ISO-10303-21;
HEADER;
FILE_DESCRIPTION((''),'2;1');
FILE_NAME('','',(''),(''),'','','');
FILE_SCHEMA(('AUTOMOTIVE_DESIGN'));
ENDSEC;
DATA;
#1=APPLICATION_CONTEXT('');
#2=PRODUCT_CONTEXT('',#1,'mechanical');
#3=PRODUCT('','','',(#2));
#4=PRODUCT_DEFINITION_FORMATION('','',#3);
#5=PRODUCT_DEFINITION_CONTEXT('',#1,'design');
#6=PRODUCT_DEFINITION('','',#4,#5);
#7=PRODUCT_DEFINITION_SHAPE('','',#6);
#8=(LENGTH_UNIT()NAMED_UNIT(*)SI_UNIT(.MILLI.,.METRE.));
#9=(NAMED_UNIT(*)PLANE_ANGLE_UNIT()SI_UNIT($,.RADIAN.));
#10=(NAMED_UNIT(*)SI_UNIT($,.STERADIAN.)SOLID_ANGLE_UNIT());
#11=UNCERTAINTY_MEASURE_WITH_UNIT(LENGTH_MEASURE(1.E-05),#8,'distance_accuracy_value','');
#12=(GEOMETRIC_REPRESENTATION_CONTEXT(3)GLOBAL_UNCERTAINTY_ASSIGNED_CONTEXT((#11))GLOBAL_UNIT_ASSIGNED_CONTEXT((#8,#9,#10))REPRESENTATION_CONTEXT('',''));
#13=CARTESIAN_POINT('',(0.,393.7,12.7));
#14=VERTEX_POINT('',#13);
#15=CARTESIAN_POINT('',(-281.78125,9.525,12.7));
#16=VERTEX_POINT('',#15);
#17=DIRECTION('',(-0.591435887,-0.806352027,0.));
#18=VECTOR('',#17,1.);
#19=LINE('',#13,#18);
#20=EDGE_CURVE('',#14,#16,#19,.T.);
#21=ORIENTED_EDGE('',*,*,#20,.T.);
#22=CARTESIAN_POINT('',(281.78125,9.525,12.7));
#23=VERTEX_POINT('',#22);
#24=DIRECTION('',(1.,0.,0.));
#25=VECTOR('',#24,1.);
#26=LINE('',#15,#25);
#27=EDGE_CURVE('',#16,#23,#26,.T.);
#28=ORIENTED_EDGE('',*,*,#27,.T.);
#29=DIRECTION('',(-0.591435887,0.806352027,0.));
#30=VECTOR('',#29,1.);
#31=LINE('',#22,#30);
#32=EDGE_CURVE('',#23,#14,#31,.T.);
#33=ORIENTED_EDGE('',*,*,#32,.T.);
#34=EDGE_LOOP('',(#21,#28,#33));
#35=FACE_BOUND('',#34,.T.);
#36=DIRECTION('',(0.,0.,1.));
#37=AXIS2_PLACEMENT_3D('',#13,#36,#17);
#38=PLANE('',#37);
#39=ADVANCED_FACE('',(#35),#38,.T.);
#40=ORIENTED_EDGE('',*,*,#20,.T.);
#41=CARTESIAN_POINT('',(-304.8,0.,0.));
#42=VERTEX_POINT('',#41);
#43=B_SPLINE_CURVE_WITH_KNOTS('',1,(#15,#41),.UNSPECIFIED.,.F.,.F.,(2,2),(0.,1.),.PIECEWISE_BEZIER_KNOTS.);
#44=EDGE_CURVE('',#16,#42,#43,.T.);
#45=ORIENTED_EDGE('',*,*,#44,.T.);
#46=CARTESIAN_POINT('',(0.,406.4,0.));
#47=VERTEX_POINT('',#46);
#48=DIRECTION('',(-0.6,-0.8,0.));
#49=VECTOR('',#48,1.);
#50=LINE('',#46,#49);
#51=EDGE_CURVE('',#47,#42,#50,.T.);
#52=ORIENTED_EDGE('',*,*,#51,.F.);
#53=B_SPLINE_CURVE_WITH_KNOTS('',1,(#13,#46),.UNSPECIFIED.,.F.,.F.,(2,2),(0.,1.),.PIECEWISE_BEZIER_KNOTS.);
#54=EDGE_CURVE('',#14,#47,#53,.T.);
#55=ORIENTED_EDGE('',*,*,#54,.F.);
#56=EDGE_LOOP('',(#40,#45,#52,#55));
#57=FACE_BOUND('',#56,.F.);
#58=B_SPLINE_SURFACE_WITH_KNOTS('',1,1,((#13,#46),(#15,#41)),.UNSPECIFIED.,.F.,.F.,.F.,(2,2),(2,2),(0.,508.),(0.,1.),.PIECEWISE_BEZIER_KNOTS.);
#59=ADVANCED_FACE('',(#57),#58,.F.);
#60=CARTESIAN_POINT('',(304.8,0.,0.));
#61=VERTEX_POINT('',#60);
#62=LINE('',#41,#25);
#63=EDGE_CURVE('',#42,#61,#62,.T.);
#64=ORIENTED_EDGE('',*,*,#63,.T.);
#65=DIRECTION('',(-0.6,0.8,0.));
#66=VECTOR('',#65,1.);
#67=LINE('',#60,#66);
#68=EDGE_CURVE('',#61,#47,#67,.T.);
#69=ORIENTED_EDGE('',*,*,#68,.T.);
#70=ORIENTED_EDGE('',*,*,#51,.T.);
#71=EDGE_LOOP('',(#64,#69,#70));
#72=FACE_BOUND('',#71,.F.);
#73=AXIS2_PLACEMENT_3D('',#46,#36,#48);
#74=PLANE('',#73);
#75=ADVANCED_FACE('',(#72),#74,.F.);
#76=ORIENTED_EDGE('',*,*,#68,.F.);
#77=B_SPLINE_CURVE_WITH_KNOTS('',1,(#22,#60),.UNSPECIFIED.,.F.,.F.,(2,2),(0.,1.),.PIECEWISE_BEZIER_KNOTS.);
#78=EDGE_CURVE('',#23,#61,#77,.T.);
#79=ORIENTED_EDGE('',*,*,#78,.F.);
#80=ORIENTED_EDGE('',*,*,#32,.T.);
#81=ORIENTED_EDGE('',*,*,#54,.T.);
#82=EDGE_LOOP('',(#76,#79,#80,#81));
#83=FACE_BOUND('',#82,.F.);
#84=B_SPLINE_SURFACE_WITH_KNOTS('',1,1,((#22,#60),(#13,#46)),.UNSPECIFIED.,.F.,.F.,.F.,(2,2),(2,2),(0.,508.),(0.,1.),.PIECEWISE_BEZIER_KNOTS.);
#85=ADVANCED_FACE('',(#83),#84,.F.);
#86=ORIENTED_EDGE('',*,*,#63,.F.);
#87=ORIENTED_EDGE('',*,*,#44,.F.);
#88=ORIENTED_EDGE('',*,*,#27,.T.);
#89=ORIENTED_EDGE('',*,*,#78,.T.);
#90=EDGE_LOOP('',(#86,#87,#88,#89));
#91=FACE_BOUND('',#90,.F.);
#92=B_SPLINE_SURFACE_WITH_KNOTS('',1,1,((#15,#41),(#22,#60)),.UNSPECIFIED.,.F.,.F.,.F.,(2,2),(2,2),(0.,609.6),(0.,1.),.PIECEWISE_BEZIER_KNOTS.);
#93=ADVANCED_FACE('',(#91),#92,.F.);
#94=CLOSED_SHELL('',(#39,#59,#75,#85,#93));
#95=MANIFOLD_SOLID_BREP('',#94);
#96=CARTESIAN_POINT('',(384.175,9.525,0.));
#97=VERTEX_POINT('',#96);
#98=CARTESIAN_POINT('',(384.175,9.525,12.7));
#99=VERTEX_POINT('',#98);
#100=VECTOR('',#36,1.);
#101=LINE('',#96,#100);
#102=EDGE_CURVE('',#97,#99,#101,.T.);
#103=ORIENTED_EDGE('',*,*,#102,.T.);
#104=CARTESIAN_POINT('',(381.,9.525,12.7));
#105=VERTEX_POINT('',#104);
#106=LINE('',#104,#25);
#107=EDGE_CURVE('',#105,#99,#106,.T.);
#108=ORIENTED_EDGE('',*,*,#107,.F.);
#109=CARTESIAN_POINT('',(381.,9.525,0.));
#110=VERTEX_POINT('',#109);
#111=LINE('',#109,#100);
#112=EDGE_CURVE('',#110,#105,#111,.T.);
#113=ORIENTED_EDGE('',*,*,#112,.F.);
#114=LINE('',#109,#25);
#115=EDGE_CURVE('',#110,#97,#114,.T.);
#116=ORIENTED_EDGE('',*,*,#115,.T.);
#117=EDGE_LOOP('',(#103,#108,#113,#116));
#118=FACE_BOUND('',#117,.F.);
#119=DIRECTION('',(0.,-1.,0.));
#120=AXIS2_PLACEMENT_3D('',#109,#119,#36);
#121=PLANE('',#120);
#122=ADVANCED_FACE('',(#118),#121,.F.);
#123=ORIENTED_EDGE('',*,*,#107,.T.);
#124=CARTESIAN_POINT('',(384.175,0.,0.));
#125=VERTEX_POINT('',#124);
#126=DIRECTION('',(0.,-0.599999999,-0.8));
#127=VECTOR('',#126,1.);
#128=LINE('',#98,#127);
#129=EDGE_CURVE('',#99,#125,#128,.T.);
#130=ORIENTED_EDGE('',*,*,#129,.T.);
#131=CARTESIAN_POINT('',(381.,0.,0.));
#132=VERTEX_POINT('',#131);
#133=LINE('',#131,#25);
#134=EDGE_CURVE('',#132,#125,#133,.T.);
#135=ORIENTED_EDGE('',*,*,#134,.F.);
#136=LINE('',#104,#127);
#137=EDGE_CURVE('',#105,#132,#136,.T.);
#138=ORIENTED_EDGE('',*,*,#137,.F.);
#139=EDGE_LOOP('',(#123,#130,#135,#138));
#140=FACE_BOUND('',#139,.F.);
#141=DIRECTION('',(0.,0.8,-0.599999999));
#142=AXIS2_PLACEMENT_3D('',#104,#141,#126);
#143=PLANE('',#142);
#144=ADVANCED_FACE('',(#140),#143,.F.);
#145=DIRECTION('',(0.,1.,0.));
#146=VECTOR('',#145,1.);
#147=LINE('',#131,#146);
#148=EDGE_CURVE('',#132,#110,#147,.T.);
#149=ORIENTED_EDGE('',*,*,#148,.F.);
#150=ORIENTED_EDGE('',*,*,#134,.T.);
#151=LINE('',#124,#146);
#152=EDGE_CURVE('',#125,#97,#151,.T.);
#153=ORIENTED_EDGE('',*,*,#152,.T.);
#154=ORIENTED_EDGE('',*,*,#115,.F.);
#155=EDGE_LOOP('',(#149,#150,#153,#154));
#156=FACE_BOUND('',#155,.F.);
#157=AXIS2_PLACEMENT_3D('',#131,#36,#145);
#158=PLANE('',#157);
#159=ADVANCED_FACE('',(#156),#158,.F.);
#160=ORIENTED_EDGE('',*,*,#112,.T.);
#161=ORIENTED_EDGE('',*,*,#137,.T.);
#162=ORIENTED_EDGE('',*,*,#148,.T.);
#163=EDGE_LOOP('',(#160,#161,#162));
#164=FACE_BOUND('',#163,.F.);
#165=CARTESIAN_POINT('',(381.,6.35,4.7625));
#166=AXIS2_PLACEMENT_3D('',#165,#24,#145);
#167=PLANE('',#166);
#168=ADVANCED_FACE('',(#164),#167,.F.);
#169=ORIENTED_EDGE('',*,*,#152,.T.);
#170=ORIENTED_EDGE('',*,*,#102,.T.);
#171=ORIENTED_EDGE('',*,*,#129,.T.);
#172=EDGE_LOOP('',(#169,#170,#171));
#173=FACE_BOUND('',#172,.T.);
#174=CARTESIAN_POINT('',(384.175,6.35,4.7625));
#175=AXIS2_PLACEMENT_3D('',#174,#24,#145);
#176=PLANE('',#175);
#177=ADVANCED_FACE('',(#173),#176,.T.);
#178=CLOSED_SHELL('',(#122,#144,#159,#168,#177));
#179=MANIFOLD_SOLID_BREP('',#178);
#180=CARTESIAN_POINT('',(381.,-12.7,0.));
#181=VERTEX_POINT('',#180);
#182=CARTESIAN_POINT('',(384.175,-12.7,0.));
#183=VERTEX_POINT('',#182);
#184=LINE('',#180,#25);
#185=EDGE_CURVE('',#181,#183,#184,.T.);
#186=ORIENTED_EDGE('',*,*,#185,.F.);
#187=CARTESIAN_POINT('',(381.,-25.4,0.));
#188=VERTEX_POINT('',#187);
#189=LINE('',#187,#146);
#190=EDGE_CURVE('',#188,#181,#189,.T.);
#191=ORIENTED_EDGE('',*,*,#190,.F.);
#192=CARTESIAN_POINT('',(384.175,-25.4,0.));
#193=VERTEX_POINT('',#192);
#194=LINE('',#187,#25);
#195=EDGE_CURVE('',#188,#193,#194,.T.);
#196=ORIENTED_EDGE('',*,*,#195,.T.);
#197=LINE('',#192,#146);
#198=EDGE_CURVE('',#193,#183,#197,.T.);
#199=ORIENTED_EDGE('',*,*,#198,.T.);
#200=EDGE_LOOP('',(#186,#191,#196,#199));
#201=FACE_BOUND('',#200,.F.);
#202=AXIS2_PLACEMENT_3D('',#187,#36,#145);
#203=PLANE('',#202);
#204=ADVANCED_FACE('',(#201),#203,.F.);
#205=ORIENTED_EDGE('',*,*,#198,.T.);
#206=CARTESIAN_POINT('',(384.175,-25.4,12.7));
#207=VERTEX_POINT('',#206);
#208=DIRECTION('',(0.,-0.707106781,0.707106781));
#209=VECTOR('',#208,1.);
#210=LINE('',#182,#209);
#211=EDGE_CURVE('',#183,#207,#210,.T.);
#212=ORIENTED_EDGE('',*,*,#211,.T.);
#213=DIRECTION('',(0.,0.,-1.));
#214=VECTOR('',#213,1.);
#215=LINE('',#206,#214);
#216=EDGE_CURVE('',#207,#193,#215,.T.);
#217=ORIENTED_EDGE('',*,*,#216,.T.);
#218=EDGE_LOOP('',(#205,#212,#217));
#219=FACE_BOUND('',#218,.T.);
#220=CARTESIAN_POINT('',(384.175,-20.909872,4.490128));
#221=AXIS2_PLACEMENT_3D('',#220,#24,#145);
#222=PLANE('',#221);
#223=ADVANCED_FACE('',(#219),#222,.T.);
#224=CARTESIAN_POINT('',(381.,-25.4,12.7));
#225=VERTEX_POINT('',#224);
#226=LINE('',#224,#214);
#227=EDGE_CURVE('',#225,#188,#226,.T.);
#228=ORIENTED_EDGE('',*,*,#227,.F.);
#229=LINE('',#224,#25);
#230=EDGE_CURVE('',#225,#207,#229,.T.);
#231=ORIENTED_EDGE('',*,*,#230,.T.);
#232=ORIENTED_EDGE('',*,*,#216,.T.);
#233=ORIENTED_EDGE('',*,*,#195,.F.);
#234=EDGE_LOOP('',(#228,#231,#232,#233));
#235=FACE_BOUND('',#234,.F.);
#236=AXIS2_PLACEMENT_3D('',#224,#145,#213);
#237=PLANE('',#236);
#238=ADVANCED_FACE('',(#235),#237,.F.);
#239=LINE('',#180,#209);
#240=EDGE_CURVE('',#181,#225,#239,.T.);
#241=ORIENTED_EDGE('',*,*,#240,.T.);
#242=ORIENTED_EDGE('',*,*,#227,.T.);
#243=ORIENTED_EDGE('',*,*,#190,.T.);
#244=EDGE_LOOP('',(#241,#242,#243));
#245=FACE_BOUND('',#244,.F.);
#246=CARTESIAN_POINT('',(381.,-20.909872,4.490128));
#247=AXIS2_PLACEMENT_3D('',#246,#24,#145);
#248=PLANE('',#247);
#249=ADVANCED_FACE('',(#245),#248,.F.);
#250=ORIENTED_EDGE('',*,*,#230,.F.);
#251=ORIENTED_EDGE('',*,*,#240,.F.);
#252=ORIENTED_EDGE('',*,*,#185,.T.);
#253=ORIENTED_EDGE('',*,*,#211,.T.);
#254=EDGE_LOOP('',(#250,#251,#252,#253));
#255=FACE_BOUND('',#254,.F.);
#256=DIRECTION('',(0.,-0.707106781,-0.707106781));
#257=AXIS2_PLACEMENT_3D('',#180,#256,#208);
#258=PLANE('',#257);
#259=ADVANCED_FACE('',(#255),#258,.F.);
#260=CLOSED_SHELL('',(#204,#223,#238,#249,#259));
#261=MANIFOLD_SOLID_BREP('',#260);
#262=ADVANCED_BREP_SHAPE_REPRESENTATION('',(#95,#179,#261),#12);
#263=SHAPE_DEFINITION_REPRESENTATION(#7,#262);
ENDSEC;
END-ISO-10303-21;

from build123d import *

# Parameters (mm, degrees)
F10_DEPTH = 3.175


# Not quite as in the source:
# - a length typed as a fraction of an inch, garbled in the dataset ("3 / 203.2 mm" for 3/8 in), is restored


with BuildPart() as f7:
    # F6 (on offset) → F7 section 0
    with BuildSketch(Plane.XY.offset(12.7)):
        Polygon((0, 393.7), (-281.7812500119, 9.5249999841), (0, 9.5249999841), (281.7812500119, 9.5249999841), align=None)
    # F1 (on Top) → F7 section 1
    with BuildSketch(Plane.XY):
        Polygon((-304.8, 0), (0, 0), (304.8, 0), (0, 406.4), align=None)
    loft()


with BuildPart() as f10:
    # F9 (on offset) → F10 (new body)
    with BuildSketch(Plane.YZ.offset(381)):
        Polygon((9.5249999841, 0), (9.5249999841, 12.7), (0, 0), align=None)
    extrude(amount=F10_DEPTH)


with BuildPart() as f10b:
    # F9 (on offset) → F10, piece 2 (new body)
    with BuildSketch(Plane.YZ.offset(381)):
        Polygon((-25.4, 0), (-12.7, 0), (-25.4, 12.7), align=None)
    extrude(amount=F10_DEPTH)


solid = Compound([f7.part, f10.part, f10b.part])
